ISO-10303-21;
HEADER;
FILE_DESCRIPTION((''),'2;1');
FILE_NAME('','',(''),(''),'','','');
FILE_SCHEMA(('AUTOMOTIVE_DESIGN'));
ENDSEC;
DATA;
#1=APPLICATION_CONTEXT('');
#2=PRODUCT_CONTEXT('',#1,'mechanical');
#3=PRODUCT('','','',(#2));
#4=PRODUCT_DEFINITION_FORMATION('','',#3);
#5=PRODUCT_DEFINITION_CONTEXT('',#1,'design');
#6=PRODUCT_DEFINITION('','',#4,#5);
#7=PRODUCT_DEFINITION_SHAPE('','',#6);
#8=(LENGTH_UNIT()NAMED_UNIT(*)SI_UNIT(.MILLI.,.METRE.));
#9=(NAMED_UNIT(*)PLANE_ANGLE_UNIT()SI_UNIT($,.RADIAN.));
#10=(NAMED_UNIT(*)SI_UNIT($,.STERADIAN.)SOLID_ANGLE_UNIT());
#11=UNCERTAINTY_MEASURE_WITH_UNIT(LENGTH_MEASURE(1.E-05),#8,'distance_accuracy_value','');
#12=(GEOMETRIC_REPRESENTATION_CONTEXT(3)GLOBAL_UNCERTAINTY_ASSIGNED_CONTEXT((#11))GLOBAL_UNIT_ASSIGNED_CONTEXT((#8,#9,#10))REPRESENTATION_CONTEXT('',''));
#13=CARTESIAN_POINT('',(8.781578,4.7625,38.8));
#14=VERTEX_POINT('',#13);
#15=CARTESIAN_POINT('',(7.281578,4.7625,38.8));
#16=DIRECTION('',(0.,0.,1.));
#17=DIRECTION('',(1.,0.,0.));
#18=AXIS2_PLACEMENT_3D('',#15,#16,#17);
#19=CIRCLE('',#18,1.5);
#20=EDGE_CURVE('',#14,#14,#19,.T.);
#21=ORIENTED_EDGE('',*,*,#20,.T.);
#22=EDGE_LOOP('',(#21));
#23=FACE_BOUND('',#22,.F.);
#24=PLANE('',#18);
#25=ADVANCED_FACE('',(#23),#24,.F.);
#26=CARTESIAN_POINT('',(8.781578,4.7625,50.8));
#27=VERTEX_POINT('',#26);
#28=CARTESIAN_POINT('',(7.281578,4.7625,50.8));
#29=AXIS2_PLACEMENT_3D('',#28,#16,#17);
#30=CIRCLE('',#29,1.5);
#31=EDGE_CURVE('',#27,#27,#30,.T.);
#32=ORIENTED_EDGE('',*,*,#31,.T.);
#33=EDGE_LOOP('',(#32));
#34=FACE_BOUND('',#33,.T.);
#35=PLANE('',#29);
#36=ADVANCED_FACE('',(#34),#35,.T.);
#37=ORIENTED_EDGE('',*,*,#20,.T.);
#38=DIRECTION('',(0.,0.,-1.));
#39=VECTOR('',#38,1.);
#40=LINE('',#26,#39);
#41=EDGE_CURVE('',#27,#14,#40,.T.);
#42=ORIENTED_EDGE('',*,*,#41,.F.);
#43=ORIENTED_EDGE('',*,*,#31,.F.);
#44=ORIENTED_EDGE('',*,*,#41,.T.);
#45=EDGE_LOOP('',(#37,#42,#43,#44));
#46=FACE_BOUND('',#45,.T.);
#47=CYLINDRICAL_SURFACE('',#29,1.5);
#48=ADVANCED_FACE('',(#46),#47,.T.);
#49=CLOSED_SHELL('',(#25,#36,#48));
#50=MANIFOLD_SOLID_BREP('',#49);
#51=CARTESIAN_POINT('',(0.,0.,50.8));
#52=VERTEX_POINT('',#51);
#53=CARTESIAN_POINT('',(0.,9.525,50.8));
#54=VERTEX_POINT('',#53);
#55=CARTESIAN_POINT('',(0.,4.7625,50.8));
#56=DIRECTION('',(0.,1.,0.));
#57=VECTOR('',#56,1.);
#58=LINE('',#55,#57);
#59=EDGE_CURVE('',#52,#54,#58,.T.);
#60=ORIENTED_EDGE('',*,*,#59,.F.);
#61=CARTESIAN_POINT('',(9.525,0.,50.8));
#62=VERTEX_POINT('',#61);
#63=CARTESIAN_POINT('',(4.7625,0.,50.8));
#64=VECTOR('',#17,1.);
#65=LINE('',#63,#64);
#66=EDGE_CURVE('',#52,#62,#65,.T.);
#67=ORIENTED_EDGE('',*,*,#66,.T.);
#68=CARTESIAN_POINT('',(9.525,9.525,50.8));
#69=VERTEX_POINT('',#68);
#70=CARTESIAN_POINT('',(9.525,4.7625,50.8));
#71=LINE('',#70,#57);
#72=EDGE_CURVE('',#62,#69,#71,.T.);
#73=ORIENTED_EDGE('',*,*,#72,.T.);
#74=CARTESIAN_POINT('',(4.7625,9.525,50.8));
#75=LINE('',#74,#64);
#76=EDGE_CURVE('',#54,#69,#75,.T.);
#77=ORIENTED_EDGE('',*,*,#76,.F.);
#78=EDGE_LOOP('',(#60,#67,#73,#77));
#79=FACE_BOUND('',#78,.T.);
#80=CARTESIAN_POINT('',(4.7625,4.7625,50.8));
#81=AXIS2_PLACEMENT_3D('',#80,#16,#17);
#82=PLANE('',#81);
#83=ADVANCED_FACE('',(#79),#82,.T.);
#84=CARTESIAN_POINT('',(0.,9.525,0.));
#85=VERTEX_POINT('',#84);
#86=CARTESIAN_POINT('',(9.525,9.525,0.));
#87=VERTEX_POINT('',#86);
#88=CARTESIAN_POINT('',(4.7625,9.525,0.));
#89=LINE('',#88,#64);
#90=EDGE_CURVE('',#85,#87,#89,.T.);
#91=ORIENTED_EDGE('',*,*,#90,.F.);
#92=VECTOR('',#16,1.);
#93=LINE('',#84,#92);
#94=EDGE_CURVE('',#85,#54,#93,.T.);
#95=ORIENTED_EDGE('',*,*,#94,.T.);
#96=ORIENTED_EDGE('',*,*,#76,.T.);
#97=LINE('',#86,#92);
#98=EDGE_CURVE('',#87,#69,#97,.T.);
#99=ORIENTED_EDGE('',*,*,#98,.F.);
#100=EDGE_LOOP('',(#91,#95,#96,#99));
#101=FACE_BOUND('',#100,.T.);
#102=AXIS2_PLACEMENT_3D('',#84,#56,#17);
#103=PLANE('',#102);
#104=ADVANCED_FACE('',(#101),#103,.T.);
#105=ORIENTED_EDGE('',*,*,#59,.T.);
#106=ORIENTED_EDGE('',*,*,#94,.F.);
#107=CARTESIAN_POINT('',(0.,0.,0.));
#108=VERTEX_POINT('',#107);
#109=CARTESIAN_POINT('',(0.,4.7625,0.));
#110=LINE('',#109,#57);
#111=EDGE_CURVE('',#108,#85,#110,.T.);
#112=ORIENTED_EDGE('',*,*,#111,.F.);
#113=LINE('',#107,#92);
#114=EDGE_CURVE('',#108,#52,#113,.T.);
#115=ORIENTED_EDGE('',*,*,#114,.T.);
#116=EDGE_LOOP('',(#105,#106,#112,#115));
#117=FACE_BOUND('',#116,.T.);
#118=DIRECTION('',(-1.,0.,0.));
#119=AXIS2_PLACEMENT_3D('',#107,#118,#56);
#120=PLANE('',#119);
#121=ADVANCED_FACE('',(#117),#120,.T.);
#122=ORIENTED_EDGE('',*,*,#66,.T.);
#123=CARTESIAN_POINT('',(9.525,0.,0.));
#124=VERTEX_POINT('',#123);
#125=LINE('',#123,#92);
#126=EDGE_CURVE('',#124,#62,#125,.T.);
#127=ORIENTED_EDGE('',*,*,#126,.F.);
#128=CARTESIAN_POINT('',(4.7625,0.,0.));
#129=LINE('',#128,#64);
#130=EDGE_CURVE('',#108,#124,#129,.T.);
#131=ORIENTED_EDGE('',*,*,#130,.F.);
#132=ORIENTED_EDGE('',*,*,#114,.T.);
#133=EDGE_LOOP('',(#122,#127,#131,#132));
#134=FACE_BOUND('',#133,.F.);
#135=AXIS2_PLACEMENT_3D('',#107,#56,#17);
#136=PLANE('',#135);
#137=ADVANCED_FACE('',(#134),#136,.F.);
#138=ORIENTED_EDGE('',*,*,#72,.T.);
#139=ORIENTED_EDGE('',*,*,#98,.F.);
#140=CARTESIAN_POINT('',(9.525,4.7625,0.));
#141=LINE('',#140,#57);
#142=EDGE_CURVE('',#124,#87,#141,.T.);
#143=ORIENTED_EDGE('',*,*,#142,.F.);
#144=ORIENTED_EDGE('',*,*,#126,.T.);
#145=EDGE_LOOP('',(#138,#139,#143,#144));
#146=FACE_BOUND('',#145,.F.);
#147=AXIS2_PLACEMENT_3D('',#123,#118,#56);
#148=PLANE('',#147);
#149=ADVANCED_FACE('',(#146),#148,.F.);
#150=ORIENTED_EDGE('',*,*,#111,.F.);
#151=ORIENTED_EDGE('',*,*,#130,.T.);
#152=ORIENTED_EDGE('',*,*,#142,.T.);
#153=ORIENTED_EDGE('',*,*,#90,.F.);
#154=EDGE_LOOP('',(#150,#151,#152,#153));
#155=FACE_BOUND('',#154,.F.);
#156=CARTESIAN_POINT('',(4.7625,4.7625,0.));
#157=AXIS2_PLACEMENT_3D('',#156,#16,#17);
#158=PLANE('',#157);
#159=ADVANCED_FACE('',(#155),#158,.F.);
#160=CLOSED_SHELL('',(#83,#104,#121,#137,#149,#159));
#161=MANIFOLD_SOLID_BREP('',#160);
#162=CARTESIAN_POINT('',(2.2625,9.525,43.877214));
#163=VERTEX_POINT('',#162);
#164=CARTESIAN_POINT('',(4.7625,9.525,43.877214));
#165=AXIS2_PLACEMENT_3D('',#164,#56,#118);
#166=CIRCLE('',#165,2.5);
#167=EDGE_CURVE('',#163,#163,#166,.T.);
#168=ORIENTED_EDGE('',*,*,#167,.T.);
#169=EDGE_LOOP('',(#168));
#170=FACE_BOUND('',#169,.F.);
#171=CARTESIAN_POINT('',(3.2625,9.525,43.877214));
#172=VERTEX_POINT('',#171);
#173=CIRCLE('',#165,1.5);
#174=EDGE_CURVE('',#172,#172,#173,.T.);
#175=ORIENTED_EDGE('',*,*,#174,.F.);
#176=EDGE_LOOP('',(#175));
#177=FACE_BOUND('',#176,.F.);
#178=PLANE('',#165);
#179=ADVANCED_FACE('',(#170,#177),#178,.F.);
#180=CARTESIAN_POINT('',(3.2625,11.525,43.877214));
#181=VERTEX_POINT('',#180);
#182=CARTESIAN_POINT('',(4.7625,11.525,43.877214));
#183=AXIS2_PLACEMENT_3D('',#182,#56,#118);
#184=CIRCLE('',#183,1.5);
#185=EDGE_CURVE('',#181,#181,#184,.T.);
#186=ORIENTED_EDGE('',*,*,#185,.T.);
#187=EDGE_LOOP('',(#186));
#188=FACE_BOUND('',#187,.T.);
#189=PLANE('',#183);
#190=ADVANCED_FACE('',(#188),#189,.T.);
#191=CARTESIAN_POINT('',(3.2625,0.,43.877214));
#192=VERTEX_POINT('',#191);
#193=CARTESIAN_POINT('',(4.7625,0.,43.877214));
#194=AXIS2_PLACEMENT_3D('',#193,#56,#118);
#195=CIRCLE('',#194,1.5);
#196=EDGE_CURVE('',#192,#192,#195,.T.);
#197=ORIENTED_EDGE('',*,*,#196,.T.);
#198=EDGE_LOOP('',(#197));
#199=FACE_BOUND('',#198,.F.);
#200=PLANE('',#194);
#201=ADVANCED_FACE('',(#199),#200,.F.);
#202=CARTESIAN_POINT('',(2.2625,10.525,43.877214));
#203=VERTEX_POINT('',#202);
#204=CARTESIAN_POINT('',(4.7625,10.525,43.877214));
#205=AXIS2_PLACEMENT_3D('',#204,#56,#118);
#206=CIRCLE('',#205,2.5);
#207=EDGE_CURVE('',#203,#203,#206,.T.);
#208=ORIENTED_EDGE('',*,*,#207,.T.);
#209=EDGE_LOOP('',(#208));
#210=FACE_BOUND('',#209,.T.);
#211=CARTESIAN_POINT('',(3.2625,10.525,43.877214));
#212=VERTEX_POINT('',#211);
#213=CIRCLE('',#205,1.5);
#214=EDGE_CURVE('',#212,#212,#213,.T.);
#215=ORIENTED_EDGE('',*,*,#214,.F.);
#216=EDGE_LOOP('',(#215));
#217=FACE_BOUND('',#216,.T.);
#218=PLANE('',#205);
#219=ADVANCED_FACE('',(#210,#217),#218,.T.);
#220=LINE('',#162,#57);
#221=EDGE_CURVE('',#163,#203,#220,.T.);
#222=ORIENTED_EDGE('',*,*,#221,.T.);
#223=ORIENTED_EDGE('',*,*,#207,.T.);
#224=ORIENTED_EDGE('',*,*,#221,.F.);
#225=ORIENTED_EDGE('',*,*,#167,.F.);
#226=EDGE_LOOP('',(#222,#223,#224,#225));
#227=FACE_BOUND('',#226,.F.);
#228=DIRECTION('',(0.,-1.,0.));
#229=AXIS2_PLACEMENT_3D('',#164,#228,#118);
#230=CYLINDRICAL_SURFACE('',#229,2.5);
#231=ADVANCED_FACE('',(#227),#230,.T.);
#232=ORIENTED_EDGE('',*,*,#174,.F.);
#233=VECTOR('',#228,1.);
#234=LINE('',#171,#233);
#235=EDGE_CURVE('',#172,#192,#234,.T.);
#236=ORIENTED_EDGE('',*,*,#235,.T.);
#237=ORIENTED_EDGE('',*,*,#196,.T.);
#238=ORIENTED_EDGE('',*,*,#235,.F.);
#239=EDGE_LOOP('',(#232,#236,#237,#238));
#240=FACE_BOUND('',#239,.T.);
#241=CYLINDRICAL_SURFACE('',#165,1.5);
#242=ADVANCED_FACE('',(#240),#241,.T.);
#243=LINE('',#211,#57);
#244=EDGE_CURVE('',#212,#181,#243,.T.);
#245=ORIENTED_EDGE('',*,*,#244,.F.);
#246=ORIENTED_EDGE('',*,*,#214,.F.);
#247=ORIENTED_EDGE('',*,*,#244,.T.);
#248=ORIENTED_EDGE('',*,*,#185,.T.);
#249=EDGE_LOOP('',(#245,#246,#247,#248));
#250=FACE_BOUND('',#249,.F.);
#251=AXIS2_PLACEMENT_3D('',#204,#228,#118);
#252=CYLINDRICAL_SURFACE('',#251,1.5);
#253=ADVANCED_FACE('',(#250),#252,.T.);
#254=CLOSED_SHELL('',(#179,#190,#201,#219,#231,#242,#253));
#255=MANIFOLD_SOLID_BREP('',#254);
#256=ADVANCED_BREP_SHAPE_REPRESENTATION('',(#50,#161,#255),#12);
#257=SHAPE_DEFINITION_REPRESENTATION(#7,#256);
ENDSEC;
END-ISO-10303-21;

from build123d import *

# Parameters (mm, degrees)
F0_W     = 9.525
F0_H     = 9.525
F1_DEPTH = 50.8
F2_R     = 1.5
F3_DEPTH = 9.525
F4_R     = 2.5
F5_DEPTH = 1
F6_R     = 1.5
F7_DEPTH = 1
F8_R     = 1.5
F9_DEPTH = 12


with BuildPart() as f1:
    # F0 (on Top) → F1 (new body)
    with BuildSketch(Plane.XY):
        with Locations((4.7625, 4.7625)):
            Rectangle(F0_W, F0_H)
    extrude(amount=F1_DEPTH)


with BuildPart() as f3:
    # F2 (on face) → F3 (new body, through all)
    with BuildSketch(Plane(origin=(0, 9.525, 0), x_dir=(-1, 0, 0), z_dir=(0, 1, 0))):
        with Locations((-4.7625, 43.8772141933)):
            Circle(F2_R)
    extrude(amount=-F3_DEPTH)

    # F4 (on face) → F5 (join)
    with BuildSketch(Plane(origin=(0, 9.525, 0), x_dir=(-1, 0, 0), z_dir=(0, 1, 0))):
        with Locations((-4.7625, 43.8772141933)):
            Circle(F4_R)
    extrude(amount=F5_DEPTH)

    # F6 (on face) → F7 (join)
    with BuildSketch(Plane(origin=(0, 10.525, 0), x_dir=(-1, 0, 0), z_dir=(0, 1, 0))):
        with Locations((-4.7625, 43.8772141933)):
            Circle(F6_R)
    extrude(amount=F7_DEPTH)


with BuildPart() as f9:
    # F8 (on face) → F9 (new body)
    with BuildSketch(Plane.XY.offset(50.8)):
        with Locations((7.2815776813, 4.7625)):
            Circle(F8_R)
    extrude(amount=-F9_DEPTH)


solid = Compound([f1.part, f3.part, f9.part])
